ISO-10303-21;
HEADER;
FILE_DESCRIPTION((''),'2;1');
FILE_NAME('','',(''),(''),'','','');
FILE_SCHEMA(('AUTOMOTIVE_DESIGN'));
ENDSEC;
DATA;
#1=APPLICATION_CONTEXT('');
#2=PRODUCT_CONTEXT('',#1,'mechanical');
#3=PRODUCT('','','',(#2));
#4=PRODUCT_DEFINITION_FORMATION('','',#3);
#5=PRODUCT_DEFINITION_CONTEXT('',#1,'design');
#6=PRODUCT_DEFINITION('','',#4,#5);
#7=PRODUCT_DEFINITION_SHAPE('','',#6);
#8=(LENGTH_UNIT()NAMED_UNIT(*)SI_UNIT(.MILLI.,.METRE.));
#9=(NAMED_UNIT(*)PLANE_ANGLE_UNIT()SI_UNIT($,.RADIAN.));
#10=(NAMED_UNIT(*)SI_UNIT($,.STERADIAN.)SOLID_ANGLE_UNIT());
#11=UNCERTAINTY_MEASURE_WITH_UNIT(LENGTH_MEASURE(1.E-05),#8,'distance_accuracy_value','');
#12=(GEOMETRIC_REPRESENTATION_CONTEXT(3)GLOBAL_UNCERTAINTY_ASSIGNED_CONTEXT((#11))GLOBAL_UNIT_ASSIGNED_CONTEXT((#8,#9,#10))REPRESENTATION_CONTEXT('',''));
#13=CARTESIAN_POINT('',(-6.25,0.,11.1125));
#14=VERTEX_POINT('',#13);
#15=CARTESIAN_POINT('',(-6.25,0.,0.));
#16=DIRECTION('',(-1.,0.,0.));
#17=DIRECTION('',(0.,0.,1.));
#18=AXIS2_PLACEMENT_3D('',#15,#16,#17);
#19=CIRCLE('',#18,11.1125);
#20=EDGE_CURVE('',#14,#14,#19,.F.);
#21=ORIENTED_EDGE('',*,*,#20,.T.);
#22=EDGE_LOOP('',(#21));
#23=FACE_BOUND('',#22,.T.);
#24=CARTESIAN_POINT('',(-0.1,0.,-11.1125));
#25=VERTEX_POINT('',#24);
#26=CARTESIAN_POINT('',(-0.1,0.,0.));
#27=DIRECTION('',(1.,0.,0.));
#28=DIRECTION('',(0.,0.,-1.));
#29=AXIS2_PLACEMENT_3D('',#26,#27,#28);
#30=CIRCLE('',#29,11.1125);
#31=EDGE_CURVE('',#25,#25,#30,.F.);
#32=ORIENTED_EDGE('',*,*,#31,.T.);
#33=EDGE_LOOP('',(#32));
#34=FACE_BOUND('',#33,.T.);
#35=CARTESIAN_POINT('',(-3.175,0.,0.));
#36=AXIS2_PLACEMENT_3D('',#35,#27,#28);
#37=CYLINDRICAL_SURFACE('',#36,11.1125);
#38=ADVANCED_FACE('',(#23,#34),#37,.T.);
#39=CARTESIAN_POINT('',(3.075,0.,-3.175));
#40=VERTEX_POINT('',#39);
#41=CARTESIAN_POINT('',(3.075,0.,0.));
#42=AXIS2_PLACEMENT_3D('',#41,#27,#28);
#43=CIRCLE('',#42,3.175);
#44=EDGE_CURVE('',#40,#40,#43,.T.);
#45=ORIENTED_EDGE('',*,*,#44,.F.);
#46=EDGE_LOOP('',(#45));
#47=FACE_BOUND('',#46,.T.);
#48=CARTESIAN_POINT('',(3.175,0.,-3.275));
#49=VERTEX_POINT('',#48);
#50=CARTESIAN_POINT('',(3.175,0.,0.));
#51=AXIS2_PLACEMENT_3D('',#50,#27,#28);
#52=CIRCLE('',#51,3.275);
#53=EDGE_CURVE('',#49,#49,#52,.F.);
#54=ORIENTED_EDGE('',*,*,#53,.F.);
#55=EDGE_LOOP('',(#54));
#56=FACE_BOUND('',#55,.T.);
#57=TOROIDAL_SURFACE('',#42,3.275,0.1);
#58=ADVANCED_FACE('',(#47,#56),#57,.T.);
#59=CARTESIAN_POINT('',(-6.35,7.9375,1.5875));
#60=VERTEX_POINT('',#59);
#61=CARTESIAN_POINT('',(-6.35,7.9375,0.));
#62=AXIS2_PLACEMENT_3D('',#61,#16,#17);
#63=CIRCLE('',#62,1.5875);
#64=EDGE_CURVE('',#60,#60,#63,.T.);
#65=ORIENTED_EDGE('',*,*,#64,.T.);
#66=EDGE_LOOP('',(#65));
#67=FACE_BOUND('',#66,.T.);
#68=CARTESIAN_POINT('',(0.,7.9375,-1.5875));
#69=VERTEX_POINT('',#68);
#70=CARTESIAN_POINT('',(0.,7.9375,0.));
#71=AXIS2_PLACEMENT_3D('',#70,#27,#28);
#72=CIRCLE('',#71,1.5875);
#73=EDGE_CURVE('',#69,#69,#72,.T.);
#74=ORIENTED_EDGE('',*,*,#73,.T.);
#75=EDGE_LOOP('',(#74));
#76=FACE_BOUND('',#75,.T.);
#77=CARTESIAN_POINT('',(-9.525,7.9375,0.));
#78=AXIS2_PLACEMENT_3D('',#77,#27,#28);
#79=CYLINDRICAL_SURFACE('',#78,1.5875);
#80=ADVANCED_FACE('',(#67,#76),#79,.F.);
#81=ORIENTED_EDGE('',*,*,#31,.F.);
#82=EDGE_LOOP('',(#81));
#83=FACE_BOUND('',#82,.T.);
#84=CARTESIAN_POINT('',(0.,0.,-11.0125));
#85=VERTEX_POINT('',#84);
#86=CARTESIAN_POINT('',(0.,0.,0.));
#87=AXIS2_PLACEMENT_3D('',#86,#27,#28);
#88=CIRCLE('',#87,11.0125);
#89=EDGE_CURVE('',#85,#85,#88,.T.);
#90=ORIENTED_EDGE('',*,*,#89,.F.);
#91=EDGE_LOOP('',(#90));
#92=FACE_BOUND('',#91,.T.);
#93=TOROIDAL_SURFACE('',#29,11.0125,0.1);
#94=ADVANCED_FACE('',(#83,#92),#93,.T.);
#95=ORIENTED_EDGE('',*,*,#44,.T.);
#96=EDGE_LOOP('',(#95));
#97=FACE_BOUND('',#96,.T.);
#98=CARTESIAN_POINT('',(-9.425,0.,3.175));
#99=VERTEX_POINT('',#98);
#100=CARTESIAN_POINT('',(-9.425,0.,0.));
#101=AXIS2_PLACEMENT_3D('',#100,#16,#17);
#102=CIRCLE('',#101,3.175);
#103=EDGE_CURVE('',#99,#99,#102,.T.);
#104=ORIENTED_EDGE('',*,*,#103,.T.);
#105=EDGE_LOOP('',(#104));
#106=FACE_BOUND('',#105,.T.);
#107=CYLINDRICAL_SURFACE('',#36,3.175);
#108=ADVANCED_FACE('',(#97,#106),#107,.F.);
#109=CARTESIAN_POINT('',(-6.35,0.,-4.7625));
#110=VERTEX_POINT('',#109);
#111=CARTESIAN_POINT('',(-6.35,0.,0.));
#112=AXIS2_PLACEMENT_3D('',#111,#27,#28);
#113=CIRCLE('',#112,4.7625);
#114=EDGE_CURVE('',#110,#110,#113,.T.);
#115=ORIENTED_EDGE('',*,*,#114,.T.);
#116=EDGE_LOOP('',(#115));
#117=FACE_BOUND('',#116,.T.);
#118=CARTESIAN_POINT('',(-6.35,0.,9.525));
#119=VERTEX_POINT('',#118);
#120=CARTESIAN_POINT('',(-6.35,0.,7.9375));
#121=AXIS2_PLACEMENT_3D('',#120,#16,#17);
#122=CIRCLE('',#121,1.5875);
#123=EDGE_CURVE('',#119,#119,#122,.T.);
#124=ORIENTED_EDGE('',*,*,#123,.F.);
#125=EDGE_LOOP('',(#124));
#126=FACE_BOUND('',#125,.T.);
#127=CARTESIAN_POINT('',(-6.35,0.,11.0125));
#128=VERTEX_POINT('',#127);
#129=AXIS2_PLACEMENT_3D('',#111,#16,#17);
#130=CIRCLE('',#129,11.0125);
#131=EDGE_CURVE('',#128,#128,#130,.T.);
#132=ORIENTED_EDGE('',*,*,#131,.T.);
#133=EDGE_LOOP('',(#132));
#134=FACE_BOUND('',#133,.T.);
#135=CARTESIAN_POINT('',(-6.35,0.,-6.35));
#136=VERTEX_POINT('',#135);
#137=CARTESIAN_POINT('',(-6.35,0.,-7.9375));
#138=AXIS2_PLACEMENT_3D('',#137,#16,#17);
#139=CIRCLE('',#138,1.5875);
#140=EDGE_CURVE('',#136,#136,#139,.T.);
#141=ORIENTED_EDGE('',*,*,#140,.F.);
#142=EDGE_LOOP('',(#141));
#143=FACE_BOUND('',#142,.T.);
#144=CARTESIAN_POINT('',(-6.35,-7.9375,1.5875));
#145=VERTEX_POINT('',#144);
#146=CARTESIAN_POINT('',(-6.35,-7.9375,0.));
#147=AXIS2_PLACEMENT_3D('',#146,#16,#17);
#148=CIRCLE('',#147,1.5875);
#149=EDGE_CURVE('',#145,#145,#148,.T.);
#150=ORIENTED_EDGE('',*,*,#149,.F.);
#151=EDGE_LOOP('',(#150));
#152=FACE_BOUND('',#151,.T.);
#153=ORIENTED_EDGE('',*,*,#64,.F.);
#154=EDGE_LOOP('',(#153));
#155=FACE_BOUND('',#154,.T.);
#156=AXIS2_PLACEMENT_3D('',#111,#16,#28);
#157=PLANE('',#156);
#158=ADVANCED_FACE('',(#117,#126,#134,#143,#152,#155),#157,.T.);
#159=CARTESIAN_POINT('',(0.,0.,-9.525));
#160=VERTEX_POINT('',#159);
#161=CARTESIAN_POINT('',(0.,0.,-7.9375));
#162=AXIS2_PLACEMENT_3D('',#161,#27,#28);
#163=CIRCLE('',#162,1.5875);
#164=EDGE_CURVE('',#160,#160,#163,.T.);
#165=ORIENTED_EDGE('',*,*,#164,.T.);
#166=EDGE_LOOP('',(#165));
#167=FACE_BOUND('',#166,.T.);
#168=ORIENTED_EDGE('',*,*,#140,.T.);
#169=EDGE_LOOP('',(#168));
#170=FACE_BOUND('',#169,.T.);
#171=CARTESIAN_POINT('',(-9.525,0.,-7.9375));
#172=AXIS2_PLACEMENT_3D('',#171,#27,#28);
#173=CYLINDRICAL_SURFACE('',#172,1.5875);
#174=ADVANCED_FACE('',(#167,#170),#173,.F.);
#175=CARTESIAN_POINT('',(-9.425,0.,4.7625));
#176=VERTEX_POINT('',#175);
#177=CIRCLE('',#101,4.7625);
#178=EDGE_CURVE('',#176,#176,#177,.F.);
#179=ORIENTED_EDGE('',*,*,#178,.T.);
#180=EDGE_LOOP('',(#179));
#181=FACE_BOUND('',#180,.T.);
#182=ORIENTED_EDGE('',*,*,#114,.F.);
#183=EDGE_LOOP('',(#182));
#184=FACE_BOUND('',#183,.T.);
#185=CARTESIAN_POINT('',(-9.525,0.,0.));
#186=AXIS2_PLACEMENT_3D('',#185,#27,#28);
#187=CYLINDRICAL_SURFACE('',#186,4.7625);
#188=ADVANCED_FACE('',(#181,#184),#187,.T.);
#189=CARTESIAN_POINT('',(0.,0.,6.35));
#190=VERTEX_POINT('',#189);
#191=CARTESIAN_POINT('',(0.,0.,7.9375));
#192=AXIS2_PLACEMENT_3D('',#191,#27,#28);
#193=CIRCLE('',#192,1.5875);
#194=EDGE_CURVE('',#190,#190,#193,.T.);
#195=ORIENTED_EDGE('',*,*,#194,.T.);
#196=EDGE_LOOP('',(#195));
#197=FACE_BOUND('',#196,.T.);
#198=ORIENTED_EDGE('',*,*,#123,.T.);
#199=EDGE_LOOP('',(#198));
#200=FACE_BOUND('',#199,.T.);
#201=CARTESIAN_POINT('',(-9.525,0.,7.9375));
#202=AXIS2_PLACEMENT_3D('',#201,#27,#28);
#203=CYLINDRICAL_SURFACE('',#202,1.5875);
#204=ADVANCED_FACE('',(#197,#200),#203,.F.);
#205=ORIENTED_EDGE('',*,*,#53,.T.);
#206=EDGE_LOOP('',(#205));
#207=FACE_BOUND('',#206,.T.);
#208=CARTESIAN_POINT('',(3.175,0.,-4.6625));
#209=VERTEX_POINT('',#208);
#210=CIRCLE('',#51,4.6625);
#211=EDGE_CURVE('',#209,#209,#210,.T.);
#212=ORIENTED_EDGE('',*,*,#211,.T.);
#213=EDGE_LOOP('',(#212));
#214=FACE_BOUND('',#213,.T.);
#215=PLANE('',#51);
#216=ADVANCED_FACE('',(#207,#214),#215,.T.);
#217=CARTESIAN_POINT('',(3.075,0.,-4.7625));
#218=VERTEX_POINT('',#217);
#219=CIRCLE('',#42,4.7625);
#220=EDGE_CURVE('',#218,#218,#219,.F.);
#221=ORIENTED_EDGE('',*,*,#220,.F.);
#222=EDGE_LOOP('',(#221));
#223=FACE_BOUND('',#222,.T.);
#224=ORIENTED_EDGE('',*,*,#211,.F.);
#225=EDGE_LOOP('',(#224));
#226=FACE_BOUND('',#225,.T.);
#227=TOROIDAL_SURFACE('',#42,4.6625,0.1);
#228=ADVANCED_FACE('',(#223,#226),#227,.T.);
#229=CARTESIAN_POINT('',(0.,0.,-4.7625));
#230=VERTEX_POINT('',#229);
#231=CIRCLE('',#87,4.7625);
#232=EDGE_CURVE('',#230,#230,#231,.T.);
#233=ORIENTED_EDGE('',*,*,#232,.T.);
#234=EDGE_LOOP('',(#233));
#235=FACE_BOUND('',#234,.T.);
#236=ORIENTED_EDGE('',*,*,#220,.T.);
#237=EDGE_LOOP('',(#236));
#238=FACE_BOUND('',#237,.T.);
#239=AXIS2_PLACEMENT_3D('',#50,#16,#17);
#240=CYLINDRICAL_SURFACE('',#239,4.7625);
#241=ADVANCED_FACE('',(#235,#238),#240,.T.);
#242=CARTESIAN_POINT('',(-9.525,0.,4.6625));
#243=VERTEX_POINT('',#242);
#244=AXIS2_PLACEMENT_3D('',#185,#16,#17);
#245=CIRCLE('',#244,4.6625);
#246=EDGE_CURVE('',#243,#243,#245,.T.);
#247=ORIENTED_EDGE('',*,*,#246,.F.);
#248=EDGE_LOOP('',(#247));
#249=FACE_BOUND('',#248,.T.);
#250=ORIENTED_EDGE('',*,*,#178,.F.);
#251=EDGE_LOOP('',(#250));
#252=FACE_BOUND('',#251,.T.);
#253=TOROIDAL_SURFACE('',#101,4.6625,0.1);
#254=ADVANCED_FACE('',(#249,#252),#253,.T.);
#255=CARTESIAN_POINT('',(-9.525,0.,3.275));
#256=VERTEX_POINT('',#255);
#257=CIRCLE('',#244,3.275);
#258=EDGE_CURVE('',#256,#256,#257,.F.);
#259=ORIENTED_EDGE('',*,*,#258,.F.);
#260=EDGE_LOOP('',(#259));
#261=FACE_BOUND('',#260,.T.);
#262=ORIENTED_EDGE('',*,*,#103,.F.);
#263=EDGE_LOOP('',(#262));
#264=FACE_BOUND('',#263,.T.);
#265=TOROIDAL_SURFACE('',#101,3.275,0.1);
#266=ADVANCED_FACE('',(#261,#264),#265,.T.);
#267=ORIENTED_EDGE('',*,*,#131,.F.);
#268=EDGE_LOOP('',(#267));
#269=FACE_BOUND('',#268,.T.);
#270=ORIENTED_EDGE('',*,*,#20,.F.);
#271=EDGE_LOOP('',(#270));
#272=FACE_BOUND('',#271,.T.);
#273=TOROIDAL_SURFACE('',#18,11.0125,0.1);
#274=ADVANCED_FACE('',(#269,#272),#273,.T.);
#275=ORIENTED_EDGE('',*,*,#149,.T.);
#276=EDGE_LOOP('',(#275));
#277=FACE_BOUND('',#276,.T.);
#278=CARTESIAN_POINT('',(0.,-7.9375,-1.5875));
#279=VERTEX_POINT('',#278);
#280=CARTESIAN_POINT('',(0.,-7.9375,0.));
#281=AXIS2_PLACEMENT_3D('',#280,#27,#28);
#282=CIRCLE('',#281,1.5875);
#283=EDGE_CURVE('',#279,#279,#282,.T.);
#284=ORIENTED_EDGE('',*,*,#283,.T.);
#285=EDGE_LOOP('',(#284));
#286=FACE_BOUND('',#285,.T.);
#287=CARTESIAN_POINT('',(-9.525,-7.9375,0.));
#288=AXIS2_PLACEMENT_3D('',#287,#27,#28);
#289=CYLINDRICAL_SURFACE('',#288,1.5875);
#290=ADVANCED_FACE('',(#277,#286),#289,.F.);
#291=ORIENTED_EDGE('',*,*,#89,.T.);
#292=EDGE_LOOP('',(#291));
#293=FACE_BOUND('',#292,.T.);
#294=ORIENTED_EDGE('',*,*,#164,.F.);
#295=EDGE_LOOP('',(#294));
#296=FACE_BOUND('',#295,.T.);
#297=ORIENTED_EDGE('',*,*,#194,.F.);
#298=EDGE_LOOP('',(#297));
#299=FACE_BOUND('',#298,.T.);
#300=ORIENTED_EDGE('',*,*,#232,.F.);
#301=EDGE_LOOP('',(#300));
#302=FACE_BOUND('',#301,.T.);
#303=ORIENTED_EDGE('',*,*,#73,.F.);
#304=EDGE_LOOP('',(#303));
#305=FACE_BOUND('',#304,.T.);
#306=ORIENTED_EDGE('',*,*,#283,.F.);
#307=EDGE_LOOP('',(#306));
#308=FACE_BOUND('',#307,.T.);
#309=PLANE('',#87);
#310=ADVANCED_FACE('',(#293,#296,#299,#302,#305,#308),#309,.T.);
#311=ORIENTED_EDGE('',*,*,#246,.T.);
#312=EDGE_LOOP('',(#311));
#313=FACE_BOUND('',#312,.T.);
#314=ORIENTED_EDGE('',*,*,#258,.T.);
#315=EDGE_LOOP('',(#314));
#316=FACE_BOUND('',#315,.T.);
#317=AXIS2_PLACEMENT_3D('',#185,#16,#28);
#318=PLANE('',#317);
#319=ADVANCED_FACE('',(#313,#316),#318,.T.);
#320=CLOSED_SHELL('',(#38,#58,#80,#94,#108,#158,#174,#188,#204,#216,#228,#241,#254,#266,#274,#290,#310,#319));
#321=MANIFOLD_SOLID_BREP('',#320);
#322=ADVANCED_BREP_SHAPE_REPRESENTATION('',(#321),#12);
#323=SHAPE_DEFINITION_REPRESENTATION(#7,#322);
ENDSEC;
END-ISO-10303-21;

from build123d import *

# Parameters (mm, degrees)
SKETCH1_R           = 11.1125
BOSS_EXTRUDE1_DEPTH = 3.175
SKETCH2_R           = 4.7625
BOSS_EXTRUDE2_DEPTH = 3.175
SKETCH4_R           = 3.175
CUT_EXTRUDE2_DEPTH  = 17.949861725
SKETCH3_R           = 1.5875
CUT_EXTRUDE1_DEPTH  = 19.376641083
FILLET1_R           = 0.1


with BuildPart() as part:
    # Sketch1 → Boss-Extrude1 (new body)
    with BuildSketch(Plane(origin=(0, 0, 0), x_dir=(0, 0, -1), z_dir=(1, 0, 0))):
        Circle(SKETCH1_R)
    boss_extrude1 = extrude(amount=-BOSS_EXTRUDE1_DEPTH)

    # Sketch2 → Boss-Extrude2 (add)
    with BuildSketch(Plane(origin=(0, 0, 0), x_dir=(0, 0, -1), z_dir=(1, 0, 0))):
        Circle(SKETCH2_R)
    boss_extrude2 = extrude(amount=BOSS_EXTRUDE2_DEPTH)

    # Sketch4 → Cut-Extrude2 (cut, through all)
    with BuildSketch(Plane(origin=(3.175, 0, 0), x_dir=(0, 0, -1), z_dir=(1, 0, 0))):
        Circle(SKETCH4_R)
    cut_extrude2 = extrude(amount=-CUT_EXTRUDE2_DEPTH, mode=Mode.SUBTRACT)

    # Mirror1: Boss-Extrude1, Boss-Extrude2, Cut-Extrude2 across plane
    add(boss_extrude1.mirror(Plane(origin=(-3.175, 0, 0), x_dir=(0, 0, 1), z_dir=(1, 0, 0))))
    add(boss_extrude2.mirror(Plane(origin=(-3.175, 0, 0), x_dir=(0, 0, 1), z_dir=(1, 0, 0))))
    add(cut_extrude2.mirror(Plane(origin=(-3.175, 0, 0), x_dir=(0, 0, 1), z_dir=(1, 0, 0))), mode=Mode.SUBTRACT)

    # Sketch3 → Cut-Extrude1 (cut, through all)
    with BuildSketch(Plane(origin=(0, 0, 0), x_dir=(0, 0, -1), z_dir=(1, 0, 0))):
        with Locations((7.9375, 0)):
            Circle(SKETCH3_R)
        with Locations((0, -7.9375)):
            Circle(SKETCH3_R)
        with Locations((-7.9375, 0)):
            Circle(SKETCH3_R)
        with Locations((0, 7.9375)):
            Circle(SKETCH3_R)
    extrude(amount=-CUT_EXTRUDE1_DEPTH, mode=Mode.SUBTRACT)

    # Fillet1
    fillet1_edges = [part.edges().sort_by_distance(p)[0] for p in [
        (3.175, 0, 3.175),
        (3.175, 0, 4.7625),
        (0, 0, 11.1125),
        (-9.525, 0, 3.175),
        (-9.525, 0, 4.7625),
        (-6.35, 0, 11.1125),
    ]]
    fillet(fillet1_edges, radius=FILLET1_R)


solid = part.part
